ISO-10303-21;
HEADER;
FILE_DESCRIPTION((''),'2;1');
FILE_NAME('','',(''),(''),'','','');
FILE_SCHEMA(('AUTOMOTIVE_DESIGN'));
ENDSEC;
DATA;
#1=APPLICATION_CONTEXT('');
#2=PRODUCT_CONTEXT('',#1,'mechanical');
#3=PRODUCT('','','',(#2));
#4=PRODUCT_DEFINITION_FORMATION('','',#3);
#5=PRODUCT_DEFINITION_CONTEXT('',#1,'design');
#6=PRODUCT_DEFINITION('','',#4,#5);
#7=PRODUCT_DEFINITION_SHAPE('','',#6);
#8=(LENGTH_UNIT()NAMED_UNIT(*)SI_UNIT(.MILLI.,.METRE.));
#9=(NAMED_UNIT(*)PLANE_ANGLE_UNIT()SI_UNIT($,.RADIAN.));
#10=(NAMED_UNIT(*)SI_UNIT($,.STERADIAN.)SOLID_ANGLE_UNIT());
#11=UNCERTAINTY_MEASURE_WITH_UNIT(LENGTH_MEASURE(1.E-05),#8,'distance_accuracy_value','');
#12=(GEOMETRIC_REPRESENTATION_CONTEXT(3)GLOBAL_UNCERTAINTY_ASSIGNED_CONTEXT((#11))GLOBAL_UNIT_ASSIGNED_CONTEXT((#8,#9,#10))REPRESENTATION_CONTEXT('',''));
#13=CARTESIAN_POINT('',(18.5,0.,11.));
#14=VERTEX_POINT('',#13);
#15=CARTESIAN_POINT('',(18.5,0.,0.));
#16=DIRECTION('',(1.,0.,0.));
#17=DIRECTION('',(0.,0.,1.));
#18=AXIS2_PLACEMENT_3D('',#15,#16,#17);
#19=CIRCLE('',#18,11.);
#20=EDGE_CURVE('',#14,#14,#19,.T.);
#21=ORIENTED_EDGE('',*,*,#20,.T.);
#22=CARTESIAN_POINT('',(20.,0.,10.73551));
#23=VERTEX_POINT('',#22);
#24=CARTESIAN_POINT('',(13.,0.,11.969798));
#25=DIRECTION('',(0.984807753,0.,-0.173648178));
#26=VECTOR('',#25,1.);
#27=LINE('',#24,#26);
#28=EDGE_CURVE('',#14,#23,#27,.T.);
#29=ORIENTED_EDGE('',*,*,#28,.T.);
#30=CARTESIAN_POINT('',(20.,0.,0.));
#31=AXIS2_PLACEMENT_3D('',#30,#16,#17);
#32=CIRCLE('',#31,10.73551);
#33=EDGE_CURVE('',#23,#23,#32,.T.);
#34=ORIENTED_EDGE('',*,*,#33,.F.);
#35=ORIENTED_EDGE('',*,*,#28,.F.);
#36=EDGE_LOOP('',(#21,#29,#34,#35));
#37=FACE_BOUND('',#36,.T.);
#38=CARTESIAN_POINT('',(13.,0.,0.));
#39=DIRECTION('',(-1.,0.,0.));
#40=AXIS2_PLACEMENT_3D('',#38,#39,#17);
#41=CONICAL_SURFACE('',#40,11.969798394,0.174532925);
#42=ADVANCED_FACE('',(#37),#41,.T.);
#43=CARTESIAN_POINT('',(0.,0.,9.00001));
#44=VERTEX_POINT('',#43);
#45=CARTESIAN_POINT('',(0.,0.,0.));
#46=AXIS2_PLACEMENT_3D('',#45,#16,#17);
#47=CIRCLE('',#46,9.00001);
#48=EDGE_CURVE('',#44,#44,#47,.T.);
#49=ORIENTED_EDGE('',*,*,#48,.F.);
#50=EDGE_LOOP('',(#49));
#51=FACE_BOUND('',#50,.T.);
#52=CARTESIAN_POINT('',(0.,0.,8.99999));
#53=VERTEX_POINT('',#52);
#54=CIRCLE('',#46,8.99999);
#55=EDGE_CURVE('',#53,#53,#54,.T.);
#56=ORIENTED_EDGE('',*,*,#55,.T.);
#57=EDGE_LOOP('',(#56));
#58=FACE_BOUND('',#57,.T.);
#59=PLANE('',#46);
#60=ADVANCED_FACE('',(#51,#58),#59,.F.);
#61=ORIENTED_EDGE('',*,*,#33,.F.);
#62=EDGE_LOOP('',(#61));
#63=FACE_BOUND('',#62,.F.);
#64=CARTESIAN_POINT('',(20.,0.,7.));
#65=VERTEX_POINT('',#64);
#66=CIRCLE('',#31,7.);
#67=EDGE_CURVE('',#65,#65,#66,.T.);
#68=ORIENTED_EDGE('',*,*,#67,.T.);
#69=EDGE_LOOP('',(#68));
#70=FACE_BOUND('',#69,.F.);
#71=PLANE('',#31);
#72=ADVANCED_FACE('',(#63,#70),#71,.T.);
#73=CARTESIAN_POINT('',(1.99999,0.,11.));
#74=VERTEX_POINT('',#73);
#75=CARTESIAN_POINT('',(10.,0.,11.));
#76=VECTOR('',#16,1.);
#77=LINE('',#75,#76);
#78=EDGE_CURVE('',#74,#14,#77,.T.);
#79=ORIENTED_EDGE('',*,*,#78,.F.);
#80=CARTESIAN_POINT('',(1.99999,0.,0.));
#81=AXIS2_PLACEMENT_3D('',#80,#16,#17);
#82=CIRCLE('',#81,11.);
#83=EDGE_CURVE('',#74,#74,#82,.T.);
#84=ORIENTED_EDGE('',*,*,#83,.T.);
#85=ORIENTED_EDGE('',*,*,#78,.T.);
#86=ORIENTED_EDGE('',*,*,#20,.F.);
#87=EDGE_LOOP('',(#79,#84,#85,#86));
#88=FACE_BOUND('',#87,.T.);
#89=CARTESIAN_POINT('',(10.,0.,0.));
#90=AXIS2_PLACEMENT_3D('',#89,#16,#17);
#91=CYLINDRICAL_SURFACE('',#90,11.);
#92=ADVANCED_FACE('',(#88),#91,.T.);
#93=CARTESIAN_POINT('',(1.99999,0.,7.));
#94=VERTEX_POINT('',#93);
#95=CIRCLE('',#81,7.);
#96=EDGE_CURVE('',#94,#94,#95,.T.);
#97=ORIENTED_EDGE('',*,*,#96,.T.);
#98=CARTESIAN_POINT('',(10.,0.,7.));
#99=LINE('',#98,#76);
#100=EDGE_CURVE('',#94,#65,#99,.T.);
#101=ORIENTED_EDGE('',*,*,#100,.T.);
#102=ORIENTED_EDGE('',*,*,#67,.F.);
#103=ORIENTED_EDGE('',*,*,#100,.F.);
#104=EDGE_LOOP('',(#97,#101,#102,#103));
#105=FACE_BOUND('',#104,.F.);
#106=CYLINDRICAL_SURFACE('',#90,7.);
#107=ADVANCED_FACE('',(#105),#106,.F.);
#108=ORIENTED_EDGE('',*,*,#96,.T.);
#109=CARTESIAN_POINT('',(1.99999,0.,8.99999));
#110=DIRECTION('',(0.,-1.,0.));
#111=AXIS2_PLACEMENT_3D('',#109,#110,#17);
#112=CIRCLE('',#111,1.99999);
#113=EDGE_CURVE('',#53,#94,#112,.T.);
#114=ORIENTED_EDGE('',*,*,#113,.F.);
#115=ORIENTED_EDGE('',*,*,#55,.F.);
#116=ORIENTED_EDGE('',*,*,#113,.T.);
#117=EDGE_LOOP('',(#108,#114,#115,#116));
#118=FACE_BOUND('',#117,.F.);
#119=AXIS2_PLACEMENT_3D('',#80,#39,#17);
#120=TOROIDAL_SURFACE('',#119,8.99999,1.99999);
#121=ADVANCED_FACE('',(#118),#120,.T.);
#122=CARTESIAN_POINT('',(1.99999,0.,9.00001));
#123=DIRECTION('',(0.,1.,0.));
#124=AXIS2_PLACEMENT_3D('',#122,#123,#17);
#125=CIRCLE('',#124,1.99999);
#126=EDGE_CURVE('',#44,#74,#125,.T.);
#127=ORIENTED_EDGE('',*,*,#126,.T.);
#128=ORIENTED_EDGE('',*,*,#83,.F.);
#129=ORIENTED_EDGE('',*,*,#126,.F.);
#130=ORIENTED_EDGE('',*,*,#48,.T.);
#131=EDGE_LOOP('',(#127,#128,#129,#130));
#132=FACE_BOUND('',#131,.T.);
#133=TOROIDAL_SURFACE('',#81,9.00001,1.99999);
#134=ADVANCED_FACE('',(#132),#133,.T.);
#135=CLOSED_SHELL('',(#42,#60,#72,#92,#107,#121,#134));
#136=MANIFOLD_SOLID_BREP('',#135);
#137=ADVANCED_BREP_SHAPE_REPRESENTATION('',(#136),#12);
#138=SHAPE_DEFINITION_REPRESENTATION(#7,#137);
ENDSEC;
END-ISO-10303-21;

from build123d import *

# Parameters (mm, degrees)
F0_W = 20
F0_H = 4
F4_R = 1.99999


# Not quite as in the source:
# - a fillet or chamfer is up to 0.001 mm smaller than in the source, because OpenCascade refuses the exact size


with BuildPart() as f1:
    # F0 (on Front) → F1 (revolve)
    with BuildSketch(Plane.XZ):
        with Locations((10, 9)):
            Rectangle(F0_W, F0_H)
    revolve(axis=Axis((12.6487514935, 0, 0), (1, 0, 0)))

    # F2 (on Front) → F3 (revolve, cut)
    with BuildSketch(Plane.XZ):
        Polygon((24, 11.9697983939), (13, 11.9697983939), (24, 10.0302016061), align=None)
    revolve(axis=Axis((11.270377785, 0, 0), (1, 0, 0)), mode=Mode.SUBTRACT)

    # F4 (radius 2 in the source; OpenCascade refuses exactly that, so slightly less here)
    f4_edges = [f1.edges().sort_by_distance(p)[0] for p in [
        (0, 0, -11),
        (0, 0, -7),
    ]]
    fillet(f4_edges, radius=F4_R)


solid = f1.part
